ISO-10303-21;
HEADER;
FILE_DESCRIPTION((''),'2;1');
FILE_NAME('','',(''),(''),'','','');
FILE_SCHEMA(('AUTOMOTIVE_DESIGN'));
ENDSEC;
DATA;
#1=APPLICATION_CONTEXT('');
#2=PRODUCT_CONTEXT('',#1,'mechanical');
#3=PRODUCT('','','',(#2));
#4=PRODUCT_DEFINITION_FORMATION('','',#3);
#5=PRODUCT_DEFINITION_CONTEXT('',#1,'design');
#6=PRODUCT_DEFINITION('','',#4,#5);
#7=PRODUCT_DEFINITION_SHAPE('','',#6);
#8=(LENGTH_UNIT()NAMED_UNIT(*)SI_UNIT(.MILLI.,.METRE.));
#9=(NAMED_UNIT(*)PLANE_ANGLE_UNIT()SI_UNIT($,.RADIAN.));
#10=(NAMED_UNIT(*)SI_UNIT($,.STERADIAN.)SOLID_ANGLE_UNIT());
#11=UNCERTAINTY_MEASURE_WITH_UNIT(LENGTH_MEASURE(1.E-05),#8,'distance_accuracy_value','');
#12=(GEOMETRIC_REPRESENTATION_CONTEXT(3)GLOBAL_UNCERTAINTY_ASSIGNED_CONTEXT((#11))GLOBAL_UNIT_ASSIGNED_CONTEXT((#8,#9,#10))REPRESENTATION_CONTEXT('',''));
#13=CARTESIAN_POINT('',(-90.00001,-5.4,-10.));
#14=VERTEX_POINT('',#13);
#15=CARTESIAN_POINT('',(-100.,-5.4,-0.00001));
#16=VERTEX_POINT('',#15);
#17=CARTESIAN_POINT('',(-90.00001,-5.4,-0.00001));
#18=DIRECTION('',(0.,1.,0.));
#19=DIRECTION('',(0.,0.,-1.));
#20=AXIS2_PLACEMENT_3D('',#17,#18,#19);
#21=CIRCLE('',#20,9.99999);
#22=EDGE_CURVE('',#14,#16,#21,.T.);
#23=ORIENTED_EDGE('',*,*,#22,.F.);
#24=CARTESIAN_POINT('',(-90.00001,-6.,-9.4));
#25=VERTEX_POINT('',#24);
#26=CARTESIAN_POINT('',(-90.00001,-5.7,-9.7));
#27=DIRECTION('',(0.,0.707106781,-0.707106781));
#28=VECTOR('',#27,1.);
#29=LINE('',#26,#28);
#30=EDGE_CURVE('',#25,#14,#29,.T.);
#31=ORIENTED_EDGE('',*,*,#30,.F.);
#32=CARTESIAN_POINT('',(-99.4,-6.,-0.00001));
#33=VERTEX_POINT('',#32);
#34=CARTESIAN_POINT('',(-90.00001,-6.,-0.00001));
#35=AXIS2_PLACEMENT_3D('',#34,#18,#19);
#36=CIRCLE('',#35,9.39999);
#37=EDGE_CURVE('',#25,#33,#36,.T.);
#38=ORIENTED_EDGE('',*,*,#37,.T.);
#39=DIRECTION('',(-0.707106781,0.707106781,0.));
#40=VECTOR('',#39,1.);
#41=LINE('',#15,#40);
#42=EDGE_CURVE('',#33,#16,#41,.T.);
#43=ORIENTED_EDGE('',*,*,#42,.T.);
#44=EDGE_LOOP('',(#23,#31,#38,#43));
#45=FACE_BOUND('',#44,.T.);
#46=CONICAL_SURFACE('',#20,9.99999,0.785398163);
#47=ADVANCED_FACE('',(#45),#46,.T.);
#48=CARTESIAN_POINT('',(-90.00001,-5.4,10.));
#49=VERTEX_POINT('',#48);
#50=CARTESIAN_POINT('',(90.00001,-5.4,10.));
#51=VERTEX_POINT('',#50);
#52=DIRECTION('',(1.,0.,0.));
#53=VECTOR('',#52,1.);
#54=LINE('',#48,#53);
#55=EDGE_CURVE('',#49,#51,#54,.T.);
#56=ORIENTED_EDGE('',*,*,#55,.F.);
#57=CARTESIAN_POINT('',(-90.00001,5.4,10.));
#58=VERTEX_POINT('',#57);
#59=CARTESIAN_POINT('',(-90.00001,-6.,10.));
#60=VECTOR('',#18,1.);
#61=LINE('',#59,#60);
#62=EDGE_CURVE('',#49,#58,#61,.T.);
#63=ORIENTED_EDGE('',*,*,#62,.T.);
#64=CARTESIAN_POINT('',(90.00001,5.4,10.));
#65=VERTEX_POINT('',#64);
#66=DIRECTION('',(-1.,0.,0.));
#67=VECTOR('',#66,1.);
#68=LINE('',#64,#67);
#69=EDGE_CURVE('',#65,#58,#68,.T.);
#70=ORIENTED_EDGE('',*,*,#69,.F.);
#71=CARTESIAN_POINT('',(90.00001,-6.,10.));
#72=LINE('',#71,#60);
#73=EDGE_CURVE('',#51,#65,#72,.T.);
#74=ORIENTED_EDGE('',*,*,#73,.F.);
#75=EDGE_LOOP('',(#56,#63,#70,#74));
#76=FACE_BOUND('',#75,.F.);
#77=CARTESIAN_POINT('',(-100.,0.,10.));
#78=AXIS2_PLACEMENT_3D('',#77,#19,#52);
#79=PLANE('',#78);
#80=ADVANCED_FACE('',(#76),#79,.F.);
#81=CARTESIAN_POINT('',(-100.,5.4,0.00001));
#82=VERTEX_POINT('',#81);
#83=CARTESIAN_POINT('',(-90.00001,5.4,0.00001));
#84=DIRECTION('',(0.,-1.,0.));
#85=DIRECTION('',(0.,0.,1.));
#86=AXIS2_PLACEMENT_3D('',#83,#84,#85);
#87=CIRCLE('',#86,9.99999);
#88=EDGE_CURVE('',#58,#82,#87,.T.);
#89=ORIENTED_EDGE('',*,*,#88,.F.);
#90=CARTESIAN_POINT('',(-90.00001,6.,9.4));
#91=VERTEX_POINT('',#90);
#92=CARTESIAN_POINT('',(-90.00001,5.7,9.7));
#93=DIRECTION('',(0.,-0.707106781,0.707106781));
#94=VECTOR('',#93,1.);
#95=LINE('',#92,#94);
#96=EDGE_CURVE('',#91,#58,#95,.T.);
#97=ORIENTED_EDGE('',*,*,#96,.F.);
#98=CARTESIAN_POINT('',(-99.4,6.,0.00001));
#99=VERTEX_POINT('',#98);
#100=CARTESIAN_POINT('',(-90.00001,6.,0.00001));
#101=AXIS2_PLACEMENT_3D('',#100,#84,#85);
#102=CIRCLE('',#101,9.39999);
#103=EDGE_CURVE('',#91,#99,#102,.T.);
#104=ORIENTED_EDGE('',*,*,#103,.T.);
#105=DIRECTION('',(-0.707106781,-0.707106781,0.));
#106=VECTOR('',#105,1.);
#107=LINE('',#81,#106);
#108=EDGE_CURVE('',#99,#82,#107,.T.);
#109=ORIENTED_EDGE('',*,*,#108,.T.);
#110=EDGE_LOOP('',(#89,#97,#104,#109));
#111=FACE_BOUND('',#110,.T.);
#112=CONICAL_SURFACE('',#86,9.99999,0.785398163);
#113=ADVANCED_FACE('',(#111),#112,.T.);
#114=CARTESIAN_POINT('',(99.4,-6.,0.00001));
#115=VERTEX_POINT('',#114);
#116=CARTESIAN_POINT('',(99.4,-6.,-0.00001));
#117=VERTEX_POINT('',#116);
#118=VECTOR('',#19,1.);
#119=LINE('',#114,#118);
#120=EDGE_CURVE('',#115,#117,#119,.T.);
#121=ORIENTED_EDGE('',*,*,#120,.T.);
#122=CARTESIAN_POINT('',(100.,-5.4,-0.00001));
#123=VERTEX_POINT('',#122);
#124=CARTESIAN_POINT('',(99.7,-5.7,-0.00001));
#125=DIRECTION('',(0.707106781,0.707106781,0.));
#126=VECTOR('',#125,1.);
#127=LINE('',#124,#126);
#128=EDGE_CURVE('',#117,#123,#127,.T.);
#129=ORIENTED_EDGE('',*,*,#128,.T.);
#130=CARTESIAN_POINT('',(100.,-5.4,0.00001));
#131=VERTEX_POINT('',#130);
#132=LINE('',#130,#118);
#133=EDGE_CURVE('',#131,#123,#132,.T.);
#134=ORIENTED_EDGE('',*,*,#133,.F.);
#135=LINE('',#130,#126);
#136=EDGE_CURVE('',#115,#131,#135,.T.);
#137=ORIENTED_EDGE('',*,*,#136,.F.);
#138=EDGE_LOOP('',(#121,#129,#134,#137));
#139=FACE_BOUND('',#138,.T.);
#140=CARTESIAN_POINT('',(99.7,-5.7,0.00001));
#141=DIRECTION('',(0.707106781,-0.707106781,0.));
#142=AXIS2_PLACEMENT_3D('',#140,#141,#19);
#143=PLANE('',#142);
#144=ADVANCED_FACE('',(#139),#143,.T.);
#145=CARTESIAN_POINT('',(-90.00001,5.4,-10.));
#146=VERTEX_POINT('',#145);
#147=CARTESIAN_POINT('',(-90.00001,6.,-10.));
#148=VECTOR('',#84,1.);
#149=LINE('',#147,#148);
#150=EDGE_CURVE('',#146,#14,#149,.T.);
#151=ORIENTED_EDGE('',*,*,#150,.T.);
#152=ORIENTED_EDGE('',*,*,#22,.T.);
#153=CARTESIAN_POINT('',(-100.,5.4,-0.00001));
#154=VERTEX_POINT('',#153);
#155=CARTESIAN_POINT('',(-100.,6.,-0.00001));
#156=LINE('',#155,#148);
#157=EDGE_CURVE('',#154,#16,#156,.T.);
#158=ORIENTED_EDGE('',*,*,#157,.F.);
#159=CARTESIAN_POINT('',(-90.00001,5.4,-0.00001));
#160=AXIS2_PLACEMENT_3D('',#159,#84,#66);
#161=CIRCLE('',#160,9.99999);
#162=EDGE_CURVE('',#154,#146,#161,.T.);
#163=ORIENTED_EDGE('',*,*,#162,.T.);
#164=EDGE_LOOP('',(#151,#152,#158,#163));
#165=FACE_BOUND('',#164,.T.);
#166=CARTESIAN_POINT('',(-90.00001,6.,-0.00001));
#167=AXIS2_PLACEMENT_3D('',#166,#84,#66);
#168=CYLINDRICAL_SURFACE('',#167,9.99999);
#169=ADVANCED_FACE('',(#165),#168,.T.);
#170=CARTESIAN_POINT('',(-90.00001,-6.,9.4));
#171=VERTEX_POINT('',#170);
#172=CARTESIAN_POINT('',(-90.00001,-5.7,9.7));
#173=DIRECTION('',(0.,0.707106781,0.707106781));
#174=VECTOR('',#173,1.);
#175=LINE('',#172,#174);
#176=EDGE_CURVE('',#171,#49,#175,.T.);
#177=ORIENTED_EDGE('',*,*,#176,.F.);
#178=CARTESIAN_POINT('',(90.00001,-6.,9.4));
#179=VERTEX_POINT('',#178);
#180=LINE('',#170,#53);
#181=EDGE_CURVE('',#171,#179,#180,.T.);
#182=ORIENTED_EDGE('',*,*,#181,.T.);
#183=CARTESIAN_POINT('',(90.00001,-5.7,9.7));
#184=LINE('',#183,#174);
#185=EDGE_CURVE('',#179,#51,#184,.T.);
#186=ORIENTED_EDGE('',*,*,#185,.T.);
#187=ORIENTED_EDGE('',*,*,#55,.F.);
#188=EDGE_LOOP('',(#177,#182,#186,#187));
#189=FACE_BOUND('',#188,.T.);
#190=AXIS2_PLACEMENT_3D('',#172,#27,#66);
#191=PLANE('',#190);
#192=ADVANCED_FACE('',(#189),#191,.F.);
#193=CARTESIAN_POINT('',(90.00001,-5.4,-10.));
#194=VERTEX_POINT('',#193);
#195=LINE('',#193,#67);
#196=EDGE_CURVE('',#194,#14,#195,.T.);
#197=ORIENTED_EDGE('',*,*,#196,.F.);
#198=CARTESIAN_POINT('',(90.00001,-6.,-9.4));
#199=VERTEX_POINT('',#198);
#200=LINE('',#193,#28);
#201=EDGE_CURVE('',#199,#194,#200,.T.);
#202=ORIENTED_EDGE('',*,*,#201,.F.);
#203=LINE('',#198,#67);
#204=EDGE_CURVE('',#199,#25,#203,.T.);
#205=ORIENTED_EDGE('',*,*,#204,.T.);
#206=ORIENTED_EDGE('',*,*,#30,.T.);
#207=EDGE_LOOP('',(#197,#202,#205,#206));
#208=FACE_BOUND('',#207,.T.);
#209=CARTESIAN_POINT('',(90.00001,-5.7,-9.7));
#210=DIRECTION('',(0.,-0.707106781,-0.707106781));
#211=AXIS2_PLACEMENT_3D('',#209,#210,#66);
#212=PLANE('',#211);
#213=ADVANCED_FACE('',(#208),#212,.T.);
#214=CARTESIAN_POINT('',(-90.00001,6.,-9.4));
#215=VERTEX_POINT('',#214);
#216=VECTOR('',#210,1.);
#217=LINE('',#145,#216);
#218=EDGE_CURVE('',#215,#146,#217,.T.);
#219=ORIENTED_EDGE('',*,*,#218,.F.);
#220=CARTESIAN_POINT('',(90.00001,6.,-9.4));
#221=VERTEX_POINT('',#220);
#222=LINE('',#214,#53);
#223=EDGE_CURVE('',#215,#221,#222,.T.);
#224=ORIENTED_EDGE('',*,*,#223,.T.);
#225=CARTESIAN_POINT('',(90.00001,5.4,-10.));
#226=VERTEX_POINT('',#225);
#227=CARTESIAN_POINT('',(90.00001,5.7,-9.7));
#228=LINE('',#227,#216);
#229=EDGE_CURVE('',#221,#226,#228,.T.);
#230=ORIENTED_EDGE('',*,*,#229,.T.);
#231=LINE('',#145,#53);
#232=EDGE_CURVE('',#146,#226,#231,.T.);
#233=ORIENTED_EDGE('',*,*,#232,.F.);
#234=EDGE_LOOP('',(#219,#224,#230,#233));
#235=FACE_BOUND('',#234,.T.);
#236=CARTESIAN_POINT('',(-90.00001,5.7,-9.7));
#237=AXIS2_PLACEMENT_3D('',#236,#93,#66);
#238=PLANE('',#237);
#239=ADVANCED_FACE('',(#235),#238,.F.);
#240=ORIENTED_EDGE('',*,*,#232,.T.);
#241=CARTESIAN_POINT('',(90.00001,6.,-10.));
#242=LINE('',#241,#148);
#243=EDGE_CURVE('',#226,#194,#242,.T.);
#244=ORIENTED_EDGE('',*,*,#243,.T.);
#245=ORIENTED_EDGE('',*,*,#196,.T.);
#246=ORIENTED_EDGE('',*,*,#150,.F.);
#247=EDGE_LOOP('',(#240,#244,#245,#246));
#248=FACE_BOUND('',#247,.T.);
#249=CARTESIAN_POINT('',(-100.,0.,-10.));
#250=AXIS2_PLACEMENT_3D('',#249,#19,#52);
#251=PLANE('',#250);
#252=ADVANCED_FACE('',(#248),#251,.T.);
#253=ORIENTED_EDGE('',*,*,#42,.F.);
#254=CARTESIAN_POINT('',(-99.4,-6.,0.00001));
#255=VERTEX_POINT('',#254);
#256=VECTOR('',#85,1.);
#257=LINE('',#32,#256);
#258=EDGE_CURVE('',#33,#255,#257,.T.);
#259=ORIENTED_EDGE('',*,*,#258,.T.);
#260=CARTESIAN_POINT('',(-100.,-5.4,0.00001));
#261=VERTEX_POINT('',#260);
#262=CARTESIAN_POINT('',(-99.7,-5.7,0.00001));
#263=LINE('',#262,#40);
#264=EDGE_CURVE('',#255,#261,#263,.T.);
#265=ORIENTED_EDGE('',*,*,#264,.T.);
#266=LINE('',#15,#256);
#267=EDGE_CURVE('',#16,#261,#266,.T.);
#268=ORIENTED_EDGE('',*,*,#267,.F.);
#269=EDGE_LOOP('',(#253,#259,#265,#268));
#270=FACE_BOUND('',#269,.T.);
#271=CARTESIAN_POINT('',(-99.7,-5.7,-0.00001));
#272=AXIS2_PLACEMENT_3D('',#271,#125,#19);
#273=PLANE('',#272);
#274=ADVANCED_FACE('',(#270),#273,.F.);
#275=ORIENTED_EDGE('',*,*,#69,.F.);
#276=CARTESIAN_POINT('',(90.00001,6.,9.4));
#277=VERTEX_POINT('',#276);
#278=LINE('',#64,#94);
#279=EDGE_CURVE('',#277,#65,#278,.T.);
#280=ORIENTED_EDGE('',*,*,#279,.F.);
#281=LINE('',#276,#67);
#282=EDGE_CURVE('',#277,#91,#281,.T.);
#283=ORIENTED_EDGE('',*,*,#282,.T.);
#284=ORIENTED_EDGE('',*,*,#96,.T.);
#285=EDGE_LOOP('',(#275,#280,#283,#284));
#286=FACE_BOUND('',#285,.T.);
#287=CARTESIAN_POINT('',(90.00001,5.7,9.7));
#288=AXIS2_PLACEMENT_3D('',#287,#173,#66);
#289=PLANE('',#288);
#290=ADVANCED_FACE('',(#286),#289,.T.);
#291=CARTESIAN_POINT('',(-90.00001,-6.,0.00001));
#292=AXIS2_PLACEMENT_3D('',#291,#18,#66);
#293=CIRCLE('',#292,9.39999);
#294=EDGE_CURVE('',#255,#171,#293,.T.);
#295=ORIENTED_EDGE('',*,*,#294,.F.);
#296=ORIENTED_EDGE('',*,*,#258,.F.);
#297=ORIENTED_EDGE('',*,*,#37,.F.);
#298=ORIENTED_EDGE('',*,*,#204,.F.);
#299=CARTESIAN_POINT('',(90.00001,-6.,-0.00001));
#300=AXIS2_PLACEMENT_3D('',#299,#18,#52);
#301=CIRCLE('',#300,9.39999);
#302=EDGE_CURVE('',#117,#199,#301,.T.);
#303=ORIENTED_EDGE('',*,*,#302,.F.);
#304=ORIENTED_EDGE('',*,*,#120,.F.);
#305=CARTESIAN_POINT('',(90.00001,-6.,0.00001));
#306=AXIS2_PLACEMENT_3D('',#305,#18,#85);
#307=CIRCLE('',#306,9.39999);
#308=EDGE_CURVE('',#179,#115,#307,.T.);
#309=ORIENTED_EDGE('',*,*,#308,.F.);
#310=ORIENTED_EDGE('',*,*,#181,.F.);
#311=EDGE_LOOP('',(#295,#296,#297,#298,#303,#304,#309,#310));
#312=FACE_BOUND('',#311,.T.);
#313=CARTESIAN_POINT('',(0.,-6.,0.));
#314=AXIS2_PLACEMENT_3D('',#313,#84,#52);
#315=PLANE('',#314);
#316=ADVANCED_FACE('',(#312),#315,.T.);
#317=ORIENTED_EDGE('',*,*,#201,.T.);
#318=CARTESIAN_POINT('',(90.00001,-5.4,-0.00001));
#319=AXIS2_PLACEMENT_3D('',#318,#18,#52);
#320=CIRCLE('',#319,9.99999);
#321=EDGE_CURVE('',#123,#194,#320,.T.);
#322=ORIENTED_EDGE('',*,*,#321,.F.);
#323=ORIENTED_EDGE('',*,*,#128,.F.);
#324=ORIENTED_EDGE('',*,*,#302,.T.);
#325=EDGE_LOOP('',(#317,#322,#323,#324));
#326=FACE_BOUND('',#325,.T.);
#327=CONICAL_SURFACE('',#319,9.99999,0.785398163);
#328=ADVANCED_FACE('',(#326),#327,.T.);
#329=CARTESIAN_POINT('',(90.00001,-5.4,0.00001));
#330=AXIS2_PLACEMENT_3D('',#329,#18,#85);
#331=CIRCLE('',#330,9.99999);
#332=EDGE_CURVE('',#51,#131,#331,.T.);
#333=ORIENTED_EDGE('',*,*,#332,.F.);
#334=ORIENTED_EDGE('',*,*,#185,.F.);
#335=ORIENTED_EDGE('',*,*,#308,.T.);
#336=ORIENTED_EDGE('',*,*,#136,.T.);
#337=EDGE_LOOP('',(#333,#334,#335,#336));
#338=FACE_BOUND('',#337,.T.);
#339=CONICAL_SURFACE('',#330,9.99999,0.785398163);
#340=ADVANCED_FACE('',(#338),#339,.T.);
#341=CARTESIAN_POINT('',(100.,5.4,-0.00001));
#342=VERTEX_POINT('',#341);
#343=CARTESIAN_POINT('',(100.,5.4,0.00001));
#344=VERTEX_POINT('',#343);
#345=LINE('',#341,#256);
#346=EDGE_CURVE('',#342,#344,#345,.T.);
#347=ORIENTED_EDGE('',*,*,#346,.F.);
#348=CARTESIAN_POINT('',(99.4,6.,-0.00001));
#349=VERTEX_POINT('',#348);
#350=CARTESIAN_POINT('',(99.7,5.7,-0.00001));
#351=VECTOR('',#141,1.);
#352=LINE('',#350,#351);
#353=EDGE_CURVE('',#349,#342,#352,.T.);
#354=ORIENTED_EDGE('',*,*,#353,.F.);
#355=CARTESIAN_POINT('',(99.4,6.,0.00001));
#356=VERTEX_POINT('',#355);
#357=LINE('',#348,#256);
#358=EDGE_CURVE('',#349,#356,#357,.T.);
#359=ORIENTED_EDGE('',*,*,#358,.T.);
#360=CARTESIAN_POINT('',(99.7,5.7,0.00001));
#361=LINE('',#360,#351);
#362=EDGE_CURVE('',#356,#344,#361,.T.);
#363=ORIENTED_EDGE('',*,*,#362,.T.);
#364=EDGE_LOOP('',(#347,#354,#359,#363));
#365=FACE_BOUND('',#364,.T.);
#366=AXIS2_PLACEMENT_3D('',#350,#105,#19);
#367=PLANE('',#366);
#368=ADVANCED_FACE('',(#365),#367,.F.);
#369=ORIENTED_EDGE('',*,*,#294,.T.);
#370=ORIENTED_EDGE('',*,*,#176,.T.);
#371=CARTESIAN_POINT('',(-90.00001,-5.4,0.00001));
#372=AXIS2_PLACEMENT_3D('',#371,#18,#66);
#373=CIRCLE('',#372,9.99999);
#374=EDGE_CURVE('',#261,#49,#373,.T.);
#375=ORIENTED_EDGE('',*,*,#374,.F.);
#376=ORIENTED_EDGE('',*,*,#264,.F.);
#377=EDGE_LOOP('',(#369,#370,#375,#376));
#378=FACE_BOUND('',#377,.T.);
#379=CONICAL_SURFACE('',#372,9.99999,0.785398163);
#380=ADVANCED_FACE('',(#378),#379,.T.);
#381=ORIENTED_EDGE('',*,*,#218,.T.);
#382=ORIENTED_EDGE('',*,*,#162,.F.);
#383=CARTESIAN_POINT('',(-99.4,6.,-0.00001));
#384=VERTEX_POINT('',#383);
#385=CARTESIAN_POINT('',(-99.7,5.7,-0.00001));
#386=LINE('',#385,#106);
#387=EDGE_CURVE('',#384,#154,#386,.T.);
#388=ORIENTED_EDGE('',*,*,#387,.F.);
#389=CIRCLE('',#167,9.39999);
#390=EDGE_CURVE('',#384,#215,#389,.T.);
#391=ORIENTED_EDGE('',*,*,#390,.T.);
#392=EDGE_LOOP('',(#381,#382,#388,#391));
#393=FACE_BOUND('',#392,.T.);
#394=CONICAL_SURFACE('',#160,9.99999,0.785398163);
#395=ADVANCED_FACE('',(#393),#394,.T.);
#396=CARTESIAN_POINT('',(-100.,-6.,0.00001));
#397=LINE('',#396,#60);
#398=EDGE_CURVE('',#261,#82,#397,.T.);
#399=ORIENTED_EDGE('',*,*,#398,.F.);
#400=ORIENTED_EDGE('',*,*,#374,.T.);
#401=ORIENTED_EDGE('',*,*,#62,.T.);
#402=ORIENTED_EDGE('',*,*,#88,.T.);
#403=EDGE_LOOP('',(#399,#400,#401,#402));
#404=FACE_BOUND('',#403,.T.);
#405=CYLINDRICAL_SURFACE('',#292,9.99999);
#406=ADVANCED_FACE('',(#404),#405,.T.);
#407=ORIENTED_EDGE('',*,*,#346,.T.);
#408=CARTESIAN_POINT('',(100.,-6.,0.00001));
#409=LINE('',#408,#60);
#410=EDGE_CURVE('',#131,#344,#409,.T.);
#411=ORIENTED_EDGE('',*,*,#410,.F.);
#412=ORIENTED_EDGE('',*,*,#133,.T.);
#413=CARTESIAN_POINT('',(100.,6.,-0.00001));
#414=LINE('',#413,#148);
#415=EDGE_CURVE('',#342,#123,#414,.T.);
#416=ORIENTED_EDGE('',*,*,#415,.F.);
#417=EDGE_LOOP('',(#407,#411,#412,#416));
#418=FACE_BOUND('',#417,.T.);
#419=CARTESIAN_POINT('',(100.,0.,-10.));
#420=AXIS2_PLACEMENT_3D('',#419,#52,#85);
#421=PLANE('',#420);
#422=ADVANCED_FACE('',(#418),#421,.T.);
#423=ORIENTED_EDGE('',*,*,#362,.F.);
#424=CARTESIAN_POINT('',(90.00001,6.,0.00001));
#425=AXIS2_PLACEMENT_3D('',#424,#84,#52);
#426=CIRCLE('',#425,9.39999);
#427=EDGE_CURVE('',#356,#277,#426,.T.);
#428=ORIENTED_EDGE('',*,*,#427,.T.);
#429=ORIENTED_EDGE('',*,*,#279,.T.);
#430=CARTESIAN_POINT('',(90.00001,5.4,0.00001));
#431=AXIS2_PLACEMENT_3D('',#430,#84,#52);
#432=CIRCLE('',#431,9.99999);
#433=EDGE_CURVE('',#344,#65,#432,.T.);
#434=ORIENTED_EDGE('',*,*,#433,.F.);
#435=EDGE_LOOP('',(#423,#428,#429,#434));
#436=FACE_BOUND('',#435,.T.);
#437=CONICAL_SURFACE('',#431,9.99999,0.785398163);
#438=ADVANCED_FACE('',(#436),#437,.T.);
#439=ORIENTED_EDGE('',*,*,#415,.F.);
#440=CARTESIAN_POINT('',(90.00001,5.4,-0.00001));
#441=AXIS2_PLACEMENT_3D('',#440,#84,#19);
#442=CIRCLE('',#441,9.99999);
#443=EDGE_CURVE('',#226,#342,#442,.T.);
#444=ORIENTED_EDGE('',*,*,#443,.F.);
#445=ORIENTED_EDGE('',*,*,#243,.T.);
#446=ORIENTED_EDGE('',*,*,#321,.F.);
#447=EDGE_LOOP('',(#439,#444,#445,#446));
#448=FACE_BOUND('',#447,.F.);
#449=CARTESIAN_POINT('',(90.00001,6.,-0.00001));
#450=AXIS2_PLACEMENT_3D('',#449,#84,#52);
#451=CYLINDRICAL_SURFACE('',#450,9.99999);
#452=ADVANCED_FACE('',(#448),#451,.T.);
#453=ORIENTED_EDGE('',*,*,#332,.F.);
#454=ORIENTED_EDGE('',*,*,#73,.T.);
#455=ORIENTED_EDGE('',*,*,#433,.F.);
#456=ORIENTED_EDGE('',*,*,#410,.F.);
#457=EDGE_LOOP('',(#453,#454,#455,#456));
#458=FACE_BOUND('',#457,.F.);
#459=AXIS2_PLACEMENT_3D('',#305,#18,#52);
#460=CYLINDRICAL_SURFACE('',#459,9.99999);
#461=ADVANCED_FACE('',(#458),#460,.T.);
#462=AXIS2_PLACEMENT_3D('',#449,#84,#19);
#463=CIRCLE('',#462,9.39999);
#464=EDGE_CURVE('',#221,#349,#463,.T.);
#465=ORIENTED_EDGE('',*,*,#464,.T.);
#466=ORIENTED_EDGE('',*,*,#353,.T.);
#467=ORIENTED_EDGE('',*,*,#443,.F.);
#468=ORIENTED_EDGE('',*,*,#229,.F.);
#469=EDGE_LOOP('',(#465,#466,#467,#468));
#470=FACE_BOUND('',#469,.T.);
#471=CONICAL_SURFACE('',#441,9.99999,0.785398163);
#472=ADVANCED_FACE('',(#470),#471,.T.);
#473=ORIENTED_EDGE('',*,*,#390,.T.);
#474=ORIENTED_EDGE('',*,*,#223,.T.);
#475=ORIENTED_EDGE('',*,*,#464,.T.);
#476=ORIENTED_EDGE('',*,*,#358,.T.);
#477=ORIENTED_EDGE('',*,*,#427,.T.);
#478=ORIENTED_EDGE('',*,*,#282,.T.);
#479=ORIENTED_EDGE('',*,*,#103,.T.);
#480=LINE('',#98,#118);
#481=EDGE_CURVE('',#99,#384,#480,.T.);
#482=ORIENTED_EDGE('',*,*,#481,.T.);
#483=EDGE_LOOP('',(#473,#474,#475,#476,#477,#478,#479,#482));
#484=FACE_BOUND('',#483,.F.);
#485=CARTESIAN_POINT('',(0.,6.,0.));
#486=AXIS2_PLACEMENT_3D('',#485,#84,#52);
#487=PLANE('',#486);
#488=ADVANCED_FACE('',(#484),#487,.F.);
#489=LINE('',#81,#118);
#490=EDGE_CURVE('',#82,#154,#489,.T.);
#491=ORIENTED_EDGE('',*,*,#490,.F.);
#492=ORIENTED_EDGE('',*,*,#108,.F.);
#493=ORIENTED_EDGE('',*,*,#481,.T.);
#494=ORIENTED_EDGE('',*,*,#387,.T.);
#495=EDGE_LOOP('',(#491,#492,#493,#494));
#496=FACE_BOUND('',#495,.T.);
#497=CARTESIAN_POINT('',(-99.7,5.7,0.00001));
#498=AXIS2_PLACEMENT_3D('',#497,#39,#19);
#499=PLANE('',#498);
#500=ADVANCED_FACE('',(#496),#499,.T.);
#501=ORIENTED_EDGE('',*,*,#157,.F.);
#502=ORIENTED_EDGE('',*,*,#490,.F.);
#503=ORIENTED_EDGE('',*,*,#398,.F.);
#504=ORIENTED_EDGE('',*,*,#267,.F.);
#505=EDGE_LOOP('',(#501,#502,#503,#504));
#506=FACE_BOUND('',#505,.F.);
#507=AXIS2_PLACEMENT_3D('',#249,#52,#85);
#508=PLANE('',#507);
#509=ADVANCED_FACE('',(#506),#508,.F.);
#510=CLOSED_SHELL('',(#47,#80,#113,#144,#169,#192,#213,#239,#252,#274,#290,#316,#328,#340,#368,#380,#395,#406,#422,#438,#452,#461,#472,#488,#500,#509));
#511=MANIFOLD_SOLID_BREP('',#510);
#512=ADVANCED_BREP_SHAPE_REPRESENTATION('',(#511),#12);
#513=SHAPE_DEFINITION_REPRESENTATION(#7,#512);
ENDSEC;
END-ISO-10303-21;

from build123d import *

# Parameters (mm, degrees)
F0_W     = 200
F0_H     = 20
F1_DEPTH = 6
F2_R     = 9.99999
F3_SIZE  = 0.6


# Not quite as in the source:
# - a fillet or chamfer is up to 0.001 mm smaller than in the source, because OpenCascade refuses the exact size


with BuildPart() as f1:
    # F0 (on Front) → F1 (new body, symmetric)
    with BuildSketch(Plane.XZ):
        Rectangle(F0_W, F0_H)
    extrude(amount=F1_DEPTH, both=True)

    # F2 (radius 10 in the source; OpenCascade refuses exactly that, so slightly less here)
    f2_edges = [f1.edges().sort_by_distance(p)[0] for p in [
        (100, 0, -10),
        (100, 0, 10),
        (-100, 0, -10),
        (-100, 0, 10),
    ]]
    fillet(f2_edges, radius=F2_R)

    # F3
    f3_edges = [f1.edges().sort_by_distance(p)[0] for p in [
        (0, -6, 10),
        (100, -6, 0),
        (97.071071, -6, -7.071071),
        (97.071071, -6, 7.071071),
        (0, -6, -10),
        (-97.071071, -6, -7.071071),
        (-97.071071, -6, 7.071071),
        (-100, -6, 0),
        (100, 6, 0),
        (97.071071, 6, -7.071071),
        (97.071071, 6, 7.071071),
        (0, 6, -10),
        (0, 6, 10),
        (-97.071071, 6, -7.071071),
        (-97.071071, 6, 7.071071),
        (-100, 6, 0),
    ]]
    chamfer(f3_edges, length=F3_SIZE)


solid = f1.part
